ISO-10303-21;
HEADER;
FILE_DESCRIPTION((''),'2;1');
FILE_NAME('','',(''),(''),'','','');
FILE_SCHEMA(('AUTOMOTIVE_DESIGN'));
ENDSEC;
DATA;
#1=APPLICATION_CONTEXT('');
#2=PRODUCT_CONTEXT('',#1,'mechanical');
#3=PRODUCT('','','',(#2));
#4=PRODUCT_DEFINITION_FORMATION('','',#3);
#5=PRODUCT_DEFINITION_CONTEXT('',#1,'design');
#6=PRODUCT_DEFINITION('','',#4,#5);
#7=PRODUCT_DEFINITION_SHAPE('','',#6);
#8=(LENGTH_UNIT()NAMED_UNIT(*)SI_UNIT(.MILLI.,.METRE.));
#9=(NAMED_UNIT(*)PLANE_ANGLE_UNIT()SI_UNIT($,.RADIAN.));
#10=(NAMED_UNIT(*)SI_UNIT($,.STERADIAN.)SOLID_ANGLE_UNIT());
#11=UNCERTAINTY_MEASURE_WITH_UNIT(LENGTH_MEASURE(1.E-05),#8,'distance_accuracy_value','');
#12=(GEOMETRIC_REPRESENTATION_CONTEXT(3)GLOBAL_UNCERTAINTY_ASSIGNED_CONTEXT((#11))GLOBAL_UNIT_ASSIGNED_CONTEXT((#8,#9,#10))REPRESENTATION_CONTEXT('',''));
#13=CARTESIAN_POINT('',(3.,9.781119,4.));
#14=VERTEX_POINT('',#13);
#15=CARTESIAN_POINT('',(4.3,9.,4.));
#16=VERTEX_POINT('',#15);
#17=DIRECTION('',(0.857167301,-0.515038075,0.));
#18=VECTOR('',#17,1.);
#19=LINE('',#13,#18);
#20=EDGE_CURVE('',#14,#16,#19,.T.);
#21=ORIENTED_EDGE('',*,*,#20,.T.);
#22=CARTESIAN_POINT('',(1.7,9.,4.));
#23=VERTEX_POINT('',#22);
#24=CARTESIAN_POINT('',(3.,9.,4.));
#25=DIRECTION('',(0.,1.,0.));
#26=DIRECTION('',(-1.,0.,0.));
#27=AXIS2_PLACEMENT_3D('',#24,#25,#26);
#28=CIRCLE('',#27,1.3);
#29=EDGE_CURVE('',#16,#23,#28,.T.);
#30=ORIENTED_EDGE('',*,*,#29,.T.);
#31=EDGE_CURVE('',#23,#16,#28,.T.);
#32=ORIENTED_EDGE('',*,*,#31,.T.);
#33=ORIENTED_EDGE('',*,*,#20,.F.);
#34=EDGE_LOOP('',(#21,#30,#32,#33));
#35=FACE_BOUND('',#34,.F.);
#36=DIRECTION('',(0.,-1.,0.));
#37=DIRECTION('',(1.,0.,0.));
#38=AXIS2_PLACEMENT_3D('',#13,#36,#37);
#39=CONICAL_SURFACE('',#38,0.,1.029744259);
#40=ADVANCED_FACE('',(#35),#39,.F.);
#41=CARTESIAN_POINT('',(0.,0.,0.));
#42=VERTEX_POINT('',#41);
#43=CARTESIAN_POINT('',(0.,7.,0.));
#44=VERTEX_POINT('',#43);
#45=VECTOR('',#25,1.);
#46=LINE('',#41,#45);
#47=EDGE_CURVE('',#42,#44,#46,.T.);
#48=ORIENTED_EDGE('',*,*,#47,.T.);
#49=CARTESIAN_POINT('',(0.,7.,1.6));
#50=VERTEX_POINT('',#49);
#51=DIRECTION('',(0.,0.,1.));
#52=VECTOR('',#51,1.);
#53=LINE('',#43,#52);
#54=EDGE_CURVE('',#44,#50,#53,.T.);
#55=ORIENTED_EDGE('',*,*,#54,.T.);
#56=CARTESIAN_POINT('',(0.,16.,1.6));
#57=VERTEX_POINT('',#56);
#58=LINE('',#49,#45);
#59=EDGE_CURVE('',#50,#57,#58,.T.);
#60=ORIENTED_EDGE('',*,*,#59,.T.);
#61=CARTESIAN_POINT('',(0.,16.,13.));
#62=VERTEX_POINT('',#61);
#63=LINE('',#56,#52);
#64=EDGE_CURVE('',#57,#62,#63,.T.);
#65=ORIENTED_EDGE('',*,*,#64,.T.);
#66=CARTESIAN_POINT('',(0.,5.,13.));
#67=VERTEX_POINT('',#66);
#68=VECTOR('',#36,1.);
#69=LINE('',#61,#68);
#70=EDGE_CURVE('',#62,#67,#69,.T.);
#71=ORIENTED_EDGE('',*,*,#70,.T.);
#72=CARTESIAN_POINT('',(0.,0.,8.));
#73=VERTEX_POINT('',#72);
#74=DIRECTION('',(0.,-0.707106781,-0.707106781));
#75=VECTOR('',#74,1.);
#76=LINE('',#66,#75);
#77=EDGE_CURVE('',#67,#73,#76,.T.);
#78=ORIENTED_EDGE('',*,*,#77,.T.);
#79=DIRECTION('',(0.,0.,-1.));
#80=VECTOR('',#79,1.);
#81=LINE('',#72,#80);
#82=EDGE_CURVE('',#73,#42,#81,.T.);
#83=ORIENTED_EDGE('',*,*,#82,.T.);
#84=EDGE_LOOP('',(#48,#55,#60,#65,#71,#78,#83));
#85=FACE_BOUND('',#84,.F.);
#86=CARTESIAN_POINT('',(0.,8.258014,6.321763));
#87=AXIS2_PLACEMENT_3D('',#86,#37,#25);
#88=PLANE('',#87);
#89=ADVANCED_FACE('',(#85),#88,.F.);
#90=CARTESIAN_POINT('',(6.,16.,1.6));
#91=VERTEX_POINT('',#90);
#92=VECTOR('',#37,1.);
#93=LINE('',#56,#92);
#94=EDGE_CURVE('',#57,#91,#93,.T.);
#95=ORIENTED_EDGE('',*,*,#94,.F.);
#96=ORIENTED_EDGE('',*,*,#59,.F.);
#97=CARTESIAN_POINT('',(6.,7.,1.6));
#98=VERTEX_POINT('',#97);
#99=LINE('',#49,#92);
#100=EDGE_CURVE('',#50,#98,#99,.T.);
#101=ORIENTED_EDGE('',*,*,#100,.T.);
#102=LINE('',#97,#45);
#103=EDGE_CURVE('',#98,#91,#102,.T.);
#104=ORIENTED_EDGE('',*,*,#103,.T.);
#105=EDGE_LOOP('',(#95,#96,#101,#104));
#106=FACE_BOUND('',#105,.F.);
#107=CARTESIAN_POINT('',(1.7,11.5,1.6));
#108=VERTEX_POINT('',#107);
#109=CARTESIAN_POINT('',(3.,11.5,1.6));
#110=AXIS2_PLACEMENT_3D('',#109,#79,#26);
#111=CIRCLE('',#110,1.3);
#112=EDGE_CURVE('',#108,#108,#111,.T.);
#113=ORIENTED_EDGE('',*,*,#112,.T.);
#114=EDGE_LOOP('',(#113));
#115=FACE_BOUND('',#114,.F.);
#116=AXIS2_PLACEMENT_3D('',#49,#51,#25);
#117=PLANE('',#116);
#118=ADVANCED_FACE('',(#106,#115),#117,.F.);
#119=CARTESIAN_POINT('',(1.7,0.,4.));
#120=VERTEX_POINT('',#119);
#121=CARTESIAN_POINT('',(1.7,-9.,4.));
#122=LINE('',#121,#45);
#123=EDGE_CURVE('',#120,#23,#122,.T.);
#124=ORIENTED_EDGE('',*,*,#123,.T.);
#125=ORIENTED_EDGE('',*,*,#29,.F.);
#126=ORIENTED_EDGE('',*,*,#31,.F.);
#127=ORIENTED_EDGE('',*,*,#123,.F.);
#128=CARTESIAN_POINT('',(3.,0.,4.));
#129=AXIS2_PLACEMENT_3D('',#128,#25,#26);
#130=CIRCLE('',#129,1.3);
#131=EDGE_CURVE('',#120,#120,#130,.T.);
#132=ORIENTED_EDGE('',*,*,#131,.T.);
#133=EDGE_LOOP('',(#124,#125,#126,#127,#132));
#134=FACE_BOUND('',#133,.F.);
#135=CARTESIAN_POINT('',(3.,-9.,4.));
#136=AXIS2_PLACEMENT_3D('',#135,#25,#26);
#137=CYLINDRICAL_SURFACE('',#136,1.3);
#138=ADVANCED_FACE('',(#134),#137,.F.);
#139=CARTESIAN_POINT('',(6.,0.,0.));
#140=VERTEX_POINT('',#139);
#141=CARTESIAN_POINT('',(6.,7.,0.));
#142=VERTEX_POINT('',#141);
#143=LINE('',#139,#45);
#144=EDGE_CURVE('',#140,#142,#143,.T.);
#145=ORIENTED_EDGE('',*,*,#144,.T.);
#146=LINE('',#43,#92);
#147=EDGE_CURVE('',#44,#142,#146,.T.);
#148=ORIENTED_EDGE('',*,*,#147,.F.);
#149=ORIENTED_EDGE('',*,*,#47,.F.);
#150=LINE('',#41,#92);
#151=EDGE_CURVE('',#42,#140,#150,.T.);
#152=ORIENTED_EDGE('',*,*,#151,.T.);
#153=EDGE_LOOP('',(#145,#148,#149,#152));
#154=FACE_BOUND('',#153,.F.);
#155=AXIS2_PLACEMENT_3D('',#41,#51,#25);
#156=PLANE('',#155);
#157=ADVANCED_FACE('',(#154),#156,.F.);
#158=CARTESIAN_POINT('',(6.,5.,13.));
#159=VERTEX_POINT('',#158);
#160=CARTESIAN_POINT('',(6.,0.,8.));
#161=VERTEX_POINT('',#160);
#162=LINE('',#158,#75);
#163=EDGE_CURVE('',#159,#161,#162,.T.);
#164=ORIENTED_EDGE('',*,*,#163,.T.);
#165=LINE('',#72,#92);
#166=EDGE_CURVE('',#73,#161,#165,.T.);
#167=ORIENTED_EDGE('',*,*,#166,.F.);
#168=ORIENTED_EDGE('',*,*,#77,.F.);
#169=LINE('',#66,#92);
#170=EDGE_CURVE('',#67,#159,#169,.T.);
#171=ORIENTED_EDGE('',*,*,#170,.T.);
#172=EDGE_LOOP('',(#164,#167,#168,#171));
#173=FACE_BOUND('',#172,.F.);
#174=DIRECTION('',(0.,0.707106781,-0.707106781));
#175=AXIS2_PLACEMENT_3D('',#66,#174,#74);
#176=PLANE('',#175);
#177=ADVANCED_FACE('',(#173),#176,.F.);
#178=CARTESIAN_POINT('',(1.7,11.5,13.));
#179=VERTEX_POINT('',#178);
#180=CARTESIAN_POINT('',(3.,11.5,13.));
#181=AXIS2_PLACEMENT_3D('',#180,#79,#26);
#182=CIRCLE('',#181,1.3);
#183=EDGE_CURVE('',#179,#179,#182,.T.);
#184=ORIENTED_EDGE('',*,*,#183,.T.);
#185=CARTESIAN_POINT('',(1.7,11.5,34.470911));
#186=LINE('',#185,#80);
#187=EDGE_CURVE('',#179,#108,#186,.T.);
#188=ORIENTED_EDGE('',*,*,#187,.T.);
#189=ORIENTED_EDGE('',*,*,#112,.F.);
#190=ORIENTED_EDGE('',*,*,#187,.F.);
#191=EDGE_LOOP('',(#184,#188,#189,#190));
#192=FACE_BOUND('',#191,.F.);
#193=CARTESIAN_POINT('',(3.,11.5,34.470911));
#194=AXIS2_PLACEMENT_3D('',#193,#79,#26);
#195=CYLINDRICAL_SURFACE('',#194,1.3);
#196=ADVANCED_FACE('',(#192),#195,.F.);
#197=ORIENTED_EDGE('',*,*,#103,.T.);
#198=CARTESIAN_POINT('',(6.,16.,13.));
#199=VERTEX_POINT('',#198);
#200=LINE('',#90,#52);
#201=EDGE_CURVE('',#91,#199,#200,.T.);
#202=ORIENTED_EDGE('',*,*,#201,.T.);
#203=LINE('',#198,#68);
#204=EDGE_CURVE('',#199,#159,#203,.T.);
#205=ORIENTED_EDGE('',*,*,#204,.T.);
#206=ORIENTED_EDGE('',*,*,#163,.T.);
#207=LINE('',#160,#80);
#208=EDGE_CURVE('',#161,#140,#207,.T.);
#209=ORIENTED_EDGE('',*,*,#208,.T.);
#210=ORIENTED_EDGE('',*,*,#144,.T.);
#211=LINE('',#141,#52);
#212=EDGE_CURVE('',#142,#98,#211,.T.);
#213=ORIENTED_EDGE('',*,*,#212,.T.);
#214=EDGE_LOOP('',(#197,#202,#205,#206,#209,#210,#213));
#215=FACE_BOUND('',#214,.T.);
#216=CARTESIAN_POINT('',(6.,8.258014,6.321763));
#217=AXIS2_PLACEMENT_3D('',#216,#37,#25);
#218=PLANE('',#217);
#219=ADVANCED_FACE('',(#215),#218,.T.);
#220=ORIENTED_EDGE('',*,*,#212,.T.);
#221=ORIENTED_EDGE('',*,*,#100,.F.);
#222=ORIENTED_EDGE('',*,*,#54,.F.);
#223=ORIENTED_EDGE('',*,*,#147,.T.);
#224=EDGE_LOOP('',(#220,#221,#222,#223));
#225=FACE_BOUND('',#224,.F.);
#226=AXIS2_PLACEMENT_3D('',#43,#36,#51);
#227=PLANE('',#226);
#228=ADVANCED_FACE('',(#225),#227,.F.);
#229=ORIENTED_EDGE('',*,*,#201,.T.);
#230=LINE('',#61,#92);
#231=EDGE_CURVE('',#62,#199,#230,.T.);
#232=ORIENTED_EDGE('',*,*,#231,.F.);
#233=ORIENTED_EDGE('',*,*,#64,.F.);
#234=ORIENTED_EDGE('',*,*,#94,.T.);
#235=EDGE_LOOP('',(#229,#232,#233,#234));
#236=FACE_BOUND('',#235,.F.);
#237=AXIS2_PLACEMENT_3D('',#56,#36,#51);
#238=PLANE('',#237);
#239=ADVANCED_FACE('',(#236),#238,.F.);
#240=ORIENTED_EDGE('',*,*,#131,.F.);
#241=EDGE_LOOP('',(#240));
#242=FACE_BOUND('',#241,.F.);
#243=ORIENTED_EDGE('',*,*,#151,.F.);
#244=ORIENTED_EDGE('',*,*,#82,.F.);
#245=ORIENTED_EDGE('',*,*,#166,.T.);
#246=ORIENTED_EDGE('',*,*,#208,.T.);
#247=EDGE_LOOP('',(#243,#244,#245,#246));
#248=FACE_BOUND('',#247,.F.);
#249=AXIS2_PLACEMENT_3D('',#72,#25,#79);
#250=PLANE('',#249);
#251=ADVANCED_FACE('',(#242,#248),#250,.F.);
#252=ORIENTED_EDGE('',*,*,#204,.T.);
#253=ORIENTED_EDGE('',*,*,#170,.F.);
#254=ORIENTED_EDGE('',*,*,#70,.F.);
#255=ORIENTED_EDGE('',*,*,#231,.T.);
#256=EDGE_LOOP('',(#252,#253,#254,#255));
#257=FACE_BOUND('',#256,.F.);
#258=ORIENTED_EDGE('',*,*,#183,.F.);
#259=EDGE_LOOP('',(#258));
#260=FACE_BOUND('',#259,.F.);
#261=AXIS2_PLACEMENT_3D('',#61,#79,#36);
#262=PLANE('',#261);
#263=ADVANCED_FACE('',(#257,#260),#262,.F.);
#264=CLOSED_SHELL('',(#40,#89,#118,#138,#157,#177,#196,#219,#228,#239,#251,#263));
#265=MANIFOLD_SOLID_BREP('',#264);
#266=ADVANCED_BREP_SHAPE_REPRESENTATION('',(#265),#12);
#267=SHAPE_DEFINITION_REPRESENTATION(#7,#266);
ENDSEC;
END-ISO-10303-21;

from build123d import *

# Parameters (mm, degrees)
F1_DEPTH = 6
F4_D     = 2.6
F5_D     = 2.6
F5_DEPTH = 9
F5_TIP   = 0.7811188047


with BuildPart() as f1:
    # F0 (on Right) → F1 (new body)
    with BuildSketch(Plane.YZ):
        Polygon((0, 8), (0, 0), (7, 0), (7, 1.6), (16, 1.6), (16, 13), (5, 13), align=None)
    extrude(amount=F1_DEPTH)

    # F4 (through all)
    with Locations(Plane.XY.offset(13)):
        with Locations((3, 11.5)):
            Hole(F4_D / 2)

    # F5
    with Locations(Plane.XZ):
        with Locations((3, 4)):
            Hole(F5_D / 2, depth=F5_DEPTH)
            with Locations((0, 0, -(F5_DEPTH + F5_TIP / 2))):  # 118° drill point
                Cone(0, F5_D / 2, F5_TIP, mode=Mode.SUBTRACT)


solid = f1.part
